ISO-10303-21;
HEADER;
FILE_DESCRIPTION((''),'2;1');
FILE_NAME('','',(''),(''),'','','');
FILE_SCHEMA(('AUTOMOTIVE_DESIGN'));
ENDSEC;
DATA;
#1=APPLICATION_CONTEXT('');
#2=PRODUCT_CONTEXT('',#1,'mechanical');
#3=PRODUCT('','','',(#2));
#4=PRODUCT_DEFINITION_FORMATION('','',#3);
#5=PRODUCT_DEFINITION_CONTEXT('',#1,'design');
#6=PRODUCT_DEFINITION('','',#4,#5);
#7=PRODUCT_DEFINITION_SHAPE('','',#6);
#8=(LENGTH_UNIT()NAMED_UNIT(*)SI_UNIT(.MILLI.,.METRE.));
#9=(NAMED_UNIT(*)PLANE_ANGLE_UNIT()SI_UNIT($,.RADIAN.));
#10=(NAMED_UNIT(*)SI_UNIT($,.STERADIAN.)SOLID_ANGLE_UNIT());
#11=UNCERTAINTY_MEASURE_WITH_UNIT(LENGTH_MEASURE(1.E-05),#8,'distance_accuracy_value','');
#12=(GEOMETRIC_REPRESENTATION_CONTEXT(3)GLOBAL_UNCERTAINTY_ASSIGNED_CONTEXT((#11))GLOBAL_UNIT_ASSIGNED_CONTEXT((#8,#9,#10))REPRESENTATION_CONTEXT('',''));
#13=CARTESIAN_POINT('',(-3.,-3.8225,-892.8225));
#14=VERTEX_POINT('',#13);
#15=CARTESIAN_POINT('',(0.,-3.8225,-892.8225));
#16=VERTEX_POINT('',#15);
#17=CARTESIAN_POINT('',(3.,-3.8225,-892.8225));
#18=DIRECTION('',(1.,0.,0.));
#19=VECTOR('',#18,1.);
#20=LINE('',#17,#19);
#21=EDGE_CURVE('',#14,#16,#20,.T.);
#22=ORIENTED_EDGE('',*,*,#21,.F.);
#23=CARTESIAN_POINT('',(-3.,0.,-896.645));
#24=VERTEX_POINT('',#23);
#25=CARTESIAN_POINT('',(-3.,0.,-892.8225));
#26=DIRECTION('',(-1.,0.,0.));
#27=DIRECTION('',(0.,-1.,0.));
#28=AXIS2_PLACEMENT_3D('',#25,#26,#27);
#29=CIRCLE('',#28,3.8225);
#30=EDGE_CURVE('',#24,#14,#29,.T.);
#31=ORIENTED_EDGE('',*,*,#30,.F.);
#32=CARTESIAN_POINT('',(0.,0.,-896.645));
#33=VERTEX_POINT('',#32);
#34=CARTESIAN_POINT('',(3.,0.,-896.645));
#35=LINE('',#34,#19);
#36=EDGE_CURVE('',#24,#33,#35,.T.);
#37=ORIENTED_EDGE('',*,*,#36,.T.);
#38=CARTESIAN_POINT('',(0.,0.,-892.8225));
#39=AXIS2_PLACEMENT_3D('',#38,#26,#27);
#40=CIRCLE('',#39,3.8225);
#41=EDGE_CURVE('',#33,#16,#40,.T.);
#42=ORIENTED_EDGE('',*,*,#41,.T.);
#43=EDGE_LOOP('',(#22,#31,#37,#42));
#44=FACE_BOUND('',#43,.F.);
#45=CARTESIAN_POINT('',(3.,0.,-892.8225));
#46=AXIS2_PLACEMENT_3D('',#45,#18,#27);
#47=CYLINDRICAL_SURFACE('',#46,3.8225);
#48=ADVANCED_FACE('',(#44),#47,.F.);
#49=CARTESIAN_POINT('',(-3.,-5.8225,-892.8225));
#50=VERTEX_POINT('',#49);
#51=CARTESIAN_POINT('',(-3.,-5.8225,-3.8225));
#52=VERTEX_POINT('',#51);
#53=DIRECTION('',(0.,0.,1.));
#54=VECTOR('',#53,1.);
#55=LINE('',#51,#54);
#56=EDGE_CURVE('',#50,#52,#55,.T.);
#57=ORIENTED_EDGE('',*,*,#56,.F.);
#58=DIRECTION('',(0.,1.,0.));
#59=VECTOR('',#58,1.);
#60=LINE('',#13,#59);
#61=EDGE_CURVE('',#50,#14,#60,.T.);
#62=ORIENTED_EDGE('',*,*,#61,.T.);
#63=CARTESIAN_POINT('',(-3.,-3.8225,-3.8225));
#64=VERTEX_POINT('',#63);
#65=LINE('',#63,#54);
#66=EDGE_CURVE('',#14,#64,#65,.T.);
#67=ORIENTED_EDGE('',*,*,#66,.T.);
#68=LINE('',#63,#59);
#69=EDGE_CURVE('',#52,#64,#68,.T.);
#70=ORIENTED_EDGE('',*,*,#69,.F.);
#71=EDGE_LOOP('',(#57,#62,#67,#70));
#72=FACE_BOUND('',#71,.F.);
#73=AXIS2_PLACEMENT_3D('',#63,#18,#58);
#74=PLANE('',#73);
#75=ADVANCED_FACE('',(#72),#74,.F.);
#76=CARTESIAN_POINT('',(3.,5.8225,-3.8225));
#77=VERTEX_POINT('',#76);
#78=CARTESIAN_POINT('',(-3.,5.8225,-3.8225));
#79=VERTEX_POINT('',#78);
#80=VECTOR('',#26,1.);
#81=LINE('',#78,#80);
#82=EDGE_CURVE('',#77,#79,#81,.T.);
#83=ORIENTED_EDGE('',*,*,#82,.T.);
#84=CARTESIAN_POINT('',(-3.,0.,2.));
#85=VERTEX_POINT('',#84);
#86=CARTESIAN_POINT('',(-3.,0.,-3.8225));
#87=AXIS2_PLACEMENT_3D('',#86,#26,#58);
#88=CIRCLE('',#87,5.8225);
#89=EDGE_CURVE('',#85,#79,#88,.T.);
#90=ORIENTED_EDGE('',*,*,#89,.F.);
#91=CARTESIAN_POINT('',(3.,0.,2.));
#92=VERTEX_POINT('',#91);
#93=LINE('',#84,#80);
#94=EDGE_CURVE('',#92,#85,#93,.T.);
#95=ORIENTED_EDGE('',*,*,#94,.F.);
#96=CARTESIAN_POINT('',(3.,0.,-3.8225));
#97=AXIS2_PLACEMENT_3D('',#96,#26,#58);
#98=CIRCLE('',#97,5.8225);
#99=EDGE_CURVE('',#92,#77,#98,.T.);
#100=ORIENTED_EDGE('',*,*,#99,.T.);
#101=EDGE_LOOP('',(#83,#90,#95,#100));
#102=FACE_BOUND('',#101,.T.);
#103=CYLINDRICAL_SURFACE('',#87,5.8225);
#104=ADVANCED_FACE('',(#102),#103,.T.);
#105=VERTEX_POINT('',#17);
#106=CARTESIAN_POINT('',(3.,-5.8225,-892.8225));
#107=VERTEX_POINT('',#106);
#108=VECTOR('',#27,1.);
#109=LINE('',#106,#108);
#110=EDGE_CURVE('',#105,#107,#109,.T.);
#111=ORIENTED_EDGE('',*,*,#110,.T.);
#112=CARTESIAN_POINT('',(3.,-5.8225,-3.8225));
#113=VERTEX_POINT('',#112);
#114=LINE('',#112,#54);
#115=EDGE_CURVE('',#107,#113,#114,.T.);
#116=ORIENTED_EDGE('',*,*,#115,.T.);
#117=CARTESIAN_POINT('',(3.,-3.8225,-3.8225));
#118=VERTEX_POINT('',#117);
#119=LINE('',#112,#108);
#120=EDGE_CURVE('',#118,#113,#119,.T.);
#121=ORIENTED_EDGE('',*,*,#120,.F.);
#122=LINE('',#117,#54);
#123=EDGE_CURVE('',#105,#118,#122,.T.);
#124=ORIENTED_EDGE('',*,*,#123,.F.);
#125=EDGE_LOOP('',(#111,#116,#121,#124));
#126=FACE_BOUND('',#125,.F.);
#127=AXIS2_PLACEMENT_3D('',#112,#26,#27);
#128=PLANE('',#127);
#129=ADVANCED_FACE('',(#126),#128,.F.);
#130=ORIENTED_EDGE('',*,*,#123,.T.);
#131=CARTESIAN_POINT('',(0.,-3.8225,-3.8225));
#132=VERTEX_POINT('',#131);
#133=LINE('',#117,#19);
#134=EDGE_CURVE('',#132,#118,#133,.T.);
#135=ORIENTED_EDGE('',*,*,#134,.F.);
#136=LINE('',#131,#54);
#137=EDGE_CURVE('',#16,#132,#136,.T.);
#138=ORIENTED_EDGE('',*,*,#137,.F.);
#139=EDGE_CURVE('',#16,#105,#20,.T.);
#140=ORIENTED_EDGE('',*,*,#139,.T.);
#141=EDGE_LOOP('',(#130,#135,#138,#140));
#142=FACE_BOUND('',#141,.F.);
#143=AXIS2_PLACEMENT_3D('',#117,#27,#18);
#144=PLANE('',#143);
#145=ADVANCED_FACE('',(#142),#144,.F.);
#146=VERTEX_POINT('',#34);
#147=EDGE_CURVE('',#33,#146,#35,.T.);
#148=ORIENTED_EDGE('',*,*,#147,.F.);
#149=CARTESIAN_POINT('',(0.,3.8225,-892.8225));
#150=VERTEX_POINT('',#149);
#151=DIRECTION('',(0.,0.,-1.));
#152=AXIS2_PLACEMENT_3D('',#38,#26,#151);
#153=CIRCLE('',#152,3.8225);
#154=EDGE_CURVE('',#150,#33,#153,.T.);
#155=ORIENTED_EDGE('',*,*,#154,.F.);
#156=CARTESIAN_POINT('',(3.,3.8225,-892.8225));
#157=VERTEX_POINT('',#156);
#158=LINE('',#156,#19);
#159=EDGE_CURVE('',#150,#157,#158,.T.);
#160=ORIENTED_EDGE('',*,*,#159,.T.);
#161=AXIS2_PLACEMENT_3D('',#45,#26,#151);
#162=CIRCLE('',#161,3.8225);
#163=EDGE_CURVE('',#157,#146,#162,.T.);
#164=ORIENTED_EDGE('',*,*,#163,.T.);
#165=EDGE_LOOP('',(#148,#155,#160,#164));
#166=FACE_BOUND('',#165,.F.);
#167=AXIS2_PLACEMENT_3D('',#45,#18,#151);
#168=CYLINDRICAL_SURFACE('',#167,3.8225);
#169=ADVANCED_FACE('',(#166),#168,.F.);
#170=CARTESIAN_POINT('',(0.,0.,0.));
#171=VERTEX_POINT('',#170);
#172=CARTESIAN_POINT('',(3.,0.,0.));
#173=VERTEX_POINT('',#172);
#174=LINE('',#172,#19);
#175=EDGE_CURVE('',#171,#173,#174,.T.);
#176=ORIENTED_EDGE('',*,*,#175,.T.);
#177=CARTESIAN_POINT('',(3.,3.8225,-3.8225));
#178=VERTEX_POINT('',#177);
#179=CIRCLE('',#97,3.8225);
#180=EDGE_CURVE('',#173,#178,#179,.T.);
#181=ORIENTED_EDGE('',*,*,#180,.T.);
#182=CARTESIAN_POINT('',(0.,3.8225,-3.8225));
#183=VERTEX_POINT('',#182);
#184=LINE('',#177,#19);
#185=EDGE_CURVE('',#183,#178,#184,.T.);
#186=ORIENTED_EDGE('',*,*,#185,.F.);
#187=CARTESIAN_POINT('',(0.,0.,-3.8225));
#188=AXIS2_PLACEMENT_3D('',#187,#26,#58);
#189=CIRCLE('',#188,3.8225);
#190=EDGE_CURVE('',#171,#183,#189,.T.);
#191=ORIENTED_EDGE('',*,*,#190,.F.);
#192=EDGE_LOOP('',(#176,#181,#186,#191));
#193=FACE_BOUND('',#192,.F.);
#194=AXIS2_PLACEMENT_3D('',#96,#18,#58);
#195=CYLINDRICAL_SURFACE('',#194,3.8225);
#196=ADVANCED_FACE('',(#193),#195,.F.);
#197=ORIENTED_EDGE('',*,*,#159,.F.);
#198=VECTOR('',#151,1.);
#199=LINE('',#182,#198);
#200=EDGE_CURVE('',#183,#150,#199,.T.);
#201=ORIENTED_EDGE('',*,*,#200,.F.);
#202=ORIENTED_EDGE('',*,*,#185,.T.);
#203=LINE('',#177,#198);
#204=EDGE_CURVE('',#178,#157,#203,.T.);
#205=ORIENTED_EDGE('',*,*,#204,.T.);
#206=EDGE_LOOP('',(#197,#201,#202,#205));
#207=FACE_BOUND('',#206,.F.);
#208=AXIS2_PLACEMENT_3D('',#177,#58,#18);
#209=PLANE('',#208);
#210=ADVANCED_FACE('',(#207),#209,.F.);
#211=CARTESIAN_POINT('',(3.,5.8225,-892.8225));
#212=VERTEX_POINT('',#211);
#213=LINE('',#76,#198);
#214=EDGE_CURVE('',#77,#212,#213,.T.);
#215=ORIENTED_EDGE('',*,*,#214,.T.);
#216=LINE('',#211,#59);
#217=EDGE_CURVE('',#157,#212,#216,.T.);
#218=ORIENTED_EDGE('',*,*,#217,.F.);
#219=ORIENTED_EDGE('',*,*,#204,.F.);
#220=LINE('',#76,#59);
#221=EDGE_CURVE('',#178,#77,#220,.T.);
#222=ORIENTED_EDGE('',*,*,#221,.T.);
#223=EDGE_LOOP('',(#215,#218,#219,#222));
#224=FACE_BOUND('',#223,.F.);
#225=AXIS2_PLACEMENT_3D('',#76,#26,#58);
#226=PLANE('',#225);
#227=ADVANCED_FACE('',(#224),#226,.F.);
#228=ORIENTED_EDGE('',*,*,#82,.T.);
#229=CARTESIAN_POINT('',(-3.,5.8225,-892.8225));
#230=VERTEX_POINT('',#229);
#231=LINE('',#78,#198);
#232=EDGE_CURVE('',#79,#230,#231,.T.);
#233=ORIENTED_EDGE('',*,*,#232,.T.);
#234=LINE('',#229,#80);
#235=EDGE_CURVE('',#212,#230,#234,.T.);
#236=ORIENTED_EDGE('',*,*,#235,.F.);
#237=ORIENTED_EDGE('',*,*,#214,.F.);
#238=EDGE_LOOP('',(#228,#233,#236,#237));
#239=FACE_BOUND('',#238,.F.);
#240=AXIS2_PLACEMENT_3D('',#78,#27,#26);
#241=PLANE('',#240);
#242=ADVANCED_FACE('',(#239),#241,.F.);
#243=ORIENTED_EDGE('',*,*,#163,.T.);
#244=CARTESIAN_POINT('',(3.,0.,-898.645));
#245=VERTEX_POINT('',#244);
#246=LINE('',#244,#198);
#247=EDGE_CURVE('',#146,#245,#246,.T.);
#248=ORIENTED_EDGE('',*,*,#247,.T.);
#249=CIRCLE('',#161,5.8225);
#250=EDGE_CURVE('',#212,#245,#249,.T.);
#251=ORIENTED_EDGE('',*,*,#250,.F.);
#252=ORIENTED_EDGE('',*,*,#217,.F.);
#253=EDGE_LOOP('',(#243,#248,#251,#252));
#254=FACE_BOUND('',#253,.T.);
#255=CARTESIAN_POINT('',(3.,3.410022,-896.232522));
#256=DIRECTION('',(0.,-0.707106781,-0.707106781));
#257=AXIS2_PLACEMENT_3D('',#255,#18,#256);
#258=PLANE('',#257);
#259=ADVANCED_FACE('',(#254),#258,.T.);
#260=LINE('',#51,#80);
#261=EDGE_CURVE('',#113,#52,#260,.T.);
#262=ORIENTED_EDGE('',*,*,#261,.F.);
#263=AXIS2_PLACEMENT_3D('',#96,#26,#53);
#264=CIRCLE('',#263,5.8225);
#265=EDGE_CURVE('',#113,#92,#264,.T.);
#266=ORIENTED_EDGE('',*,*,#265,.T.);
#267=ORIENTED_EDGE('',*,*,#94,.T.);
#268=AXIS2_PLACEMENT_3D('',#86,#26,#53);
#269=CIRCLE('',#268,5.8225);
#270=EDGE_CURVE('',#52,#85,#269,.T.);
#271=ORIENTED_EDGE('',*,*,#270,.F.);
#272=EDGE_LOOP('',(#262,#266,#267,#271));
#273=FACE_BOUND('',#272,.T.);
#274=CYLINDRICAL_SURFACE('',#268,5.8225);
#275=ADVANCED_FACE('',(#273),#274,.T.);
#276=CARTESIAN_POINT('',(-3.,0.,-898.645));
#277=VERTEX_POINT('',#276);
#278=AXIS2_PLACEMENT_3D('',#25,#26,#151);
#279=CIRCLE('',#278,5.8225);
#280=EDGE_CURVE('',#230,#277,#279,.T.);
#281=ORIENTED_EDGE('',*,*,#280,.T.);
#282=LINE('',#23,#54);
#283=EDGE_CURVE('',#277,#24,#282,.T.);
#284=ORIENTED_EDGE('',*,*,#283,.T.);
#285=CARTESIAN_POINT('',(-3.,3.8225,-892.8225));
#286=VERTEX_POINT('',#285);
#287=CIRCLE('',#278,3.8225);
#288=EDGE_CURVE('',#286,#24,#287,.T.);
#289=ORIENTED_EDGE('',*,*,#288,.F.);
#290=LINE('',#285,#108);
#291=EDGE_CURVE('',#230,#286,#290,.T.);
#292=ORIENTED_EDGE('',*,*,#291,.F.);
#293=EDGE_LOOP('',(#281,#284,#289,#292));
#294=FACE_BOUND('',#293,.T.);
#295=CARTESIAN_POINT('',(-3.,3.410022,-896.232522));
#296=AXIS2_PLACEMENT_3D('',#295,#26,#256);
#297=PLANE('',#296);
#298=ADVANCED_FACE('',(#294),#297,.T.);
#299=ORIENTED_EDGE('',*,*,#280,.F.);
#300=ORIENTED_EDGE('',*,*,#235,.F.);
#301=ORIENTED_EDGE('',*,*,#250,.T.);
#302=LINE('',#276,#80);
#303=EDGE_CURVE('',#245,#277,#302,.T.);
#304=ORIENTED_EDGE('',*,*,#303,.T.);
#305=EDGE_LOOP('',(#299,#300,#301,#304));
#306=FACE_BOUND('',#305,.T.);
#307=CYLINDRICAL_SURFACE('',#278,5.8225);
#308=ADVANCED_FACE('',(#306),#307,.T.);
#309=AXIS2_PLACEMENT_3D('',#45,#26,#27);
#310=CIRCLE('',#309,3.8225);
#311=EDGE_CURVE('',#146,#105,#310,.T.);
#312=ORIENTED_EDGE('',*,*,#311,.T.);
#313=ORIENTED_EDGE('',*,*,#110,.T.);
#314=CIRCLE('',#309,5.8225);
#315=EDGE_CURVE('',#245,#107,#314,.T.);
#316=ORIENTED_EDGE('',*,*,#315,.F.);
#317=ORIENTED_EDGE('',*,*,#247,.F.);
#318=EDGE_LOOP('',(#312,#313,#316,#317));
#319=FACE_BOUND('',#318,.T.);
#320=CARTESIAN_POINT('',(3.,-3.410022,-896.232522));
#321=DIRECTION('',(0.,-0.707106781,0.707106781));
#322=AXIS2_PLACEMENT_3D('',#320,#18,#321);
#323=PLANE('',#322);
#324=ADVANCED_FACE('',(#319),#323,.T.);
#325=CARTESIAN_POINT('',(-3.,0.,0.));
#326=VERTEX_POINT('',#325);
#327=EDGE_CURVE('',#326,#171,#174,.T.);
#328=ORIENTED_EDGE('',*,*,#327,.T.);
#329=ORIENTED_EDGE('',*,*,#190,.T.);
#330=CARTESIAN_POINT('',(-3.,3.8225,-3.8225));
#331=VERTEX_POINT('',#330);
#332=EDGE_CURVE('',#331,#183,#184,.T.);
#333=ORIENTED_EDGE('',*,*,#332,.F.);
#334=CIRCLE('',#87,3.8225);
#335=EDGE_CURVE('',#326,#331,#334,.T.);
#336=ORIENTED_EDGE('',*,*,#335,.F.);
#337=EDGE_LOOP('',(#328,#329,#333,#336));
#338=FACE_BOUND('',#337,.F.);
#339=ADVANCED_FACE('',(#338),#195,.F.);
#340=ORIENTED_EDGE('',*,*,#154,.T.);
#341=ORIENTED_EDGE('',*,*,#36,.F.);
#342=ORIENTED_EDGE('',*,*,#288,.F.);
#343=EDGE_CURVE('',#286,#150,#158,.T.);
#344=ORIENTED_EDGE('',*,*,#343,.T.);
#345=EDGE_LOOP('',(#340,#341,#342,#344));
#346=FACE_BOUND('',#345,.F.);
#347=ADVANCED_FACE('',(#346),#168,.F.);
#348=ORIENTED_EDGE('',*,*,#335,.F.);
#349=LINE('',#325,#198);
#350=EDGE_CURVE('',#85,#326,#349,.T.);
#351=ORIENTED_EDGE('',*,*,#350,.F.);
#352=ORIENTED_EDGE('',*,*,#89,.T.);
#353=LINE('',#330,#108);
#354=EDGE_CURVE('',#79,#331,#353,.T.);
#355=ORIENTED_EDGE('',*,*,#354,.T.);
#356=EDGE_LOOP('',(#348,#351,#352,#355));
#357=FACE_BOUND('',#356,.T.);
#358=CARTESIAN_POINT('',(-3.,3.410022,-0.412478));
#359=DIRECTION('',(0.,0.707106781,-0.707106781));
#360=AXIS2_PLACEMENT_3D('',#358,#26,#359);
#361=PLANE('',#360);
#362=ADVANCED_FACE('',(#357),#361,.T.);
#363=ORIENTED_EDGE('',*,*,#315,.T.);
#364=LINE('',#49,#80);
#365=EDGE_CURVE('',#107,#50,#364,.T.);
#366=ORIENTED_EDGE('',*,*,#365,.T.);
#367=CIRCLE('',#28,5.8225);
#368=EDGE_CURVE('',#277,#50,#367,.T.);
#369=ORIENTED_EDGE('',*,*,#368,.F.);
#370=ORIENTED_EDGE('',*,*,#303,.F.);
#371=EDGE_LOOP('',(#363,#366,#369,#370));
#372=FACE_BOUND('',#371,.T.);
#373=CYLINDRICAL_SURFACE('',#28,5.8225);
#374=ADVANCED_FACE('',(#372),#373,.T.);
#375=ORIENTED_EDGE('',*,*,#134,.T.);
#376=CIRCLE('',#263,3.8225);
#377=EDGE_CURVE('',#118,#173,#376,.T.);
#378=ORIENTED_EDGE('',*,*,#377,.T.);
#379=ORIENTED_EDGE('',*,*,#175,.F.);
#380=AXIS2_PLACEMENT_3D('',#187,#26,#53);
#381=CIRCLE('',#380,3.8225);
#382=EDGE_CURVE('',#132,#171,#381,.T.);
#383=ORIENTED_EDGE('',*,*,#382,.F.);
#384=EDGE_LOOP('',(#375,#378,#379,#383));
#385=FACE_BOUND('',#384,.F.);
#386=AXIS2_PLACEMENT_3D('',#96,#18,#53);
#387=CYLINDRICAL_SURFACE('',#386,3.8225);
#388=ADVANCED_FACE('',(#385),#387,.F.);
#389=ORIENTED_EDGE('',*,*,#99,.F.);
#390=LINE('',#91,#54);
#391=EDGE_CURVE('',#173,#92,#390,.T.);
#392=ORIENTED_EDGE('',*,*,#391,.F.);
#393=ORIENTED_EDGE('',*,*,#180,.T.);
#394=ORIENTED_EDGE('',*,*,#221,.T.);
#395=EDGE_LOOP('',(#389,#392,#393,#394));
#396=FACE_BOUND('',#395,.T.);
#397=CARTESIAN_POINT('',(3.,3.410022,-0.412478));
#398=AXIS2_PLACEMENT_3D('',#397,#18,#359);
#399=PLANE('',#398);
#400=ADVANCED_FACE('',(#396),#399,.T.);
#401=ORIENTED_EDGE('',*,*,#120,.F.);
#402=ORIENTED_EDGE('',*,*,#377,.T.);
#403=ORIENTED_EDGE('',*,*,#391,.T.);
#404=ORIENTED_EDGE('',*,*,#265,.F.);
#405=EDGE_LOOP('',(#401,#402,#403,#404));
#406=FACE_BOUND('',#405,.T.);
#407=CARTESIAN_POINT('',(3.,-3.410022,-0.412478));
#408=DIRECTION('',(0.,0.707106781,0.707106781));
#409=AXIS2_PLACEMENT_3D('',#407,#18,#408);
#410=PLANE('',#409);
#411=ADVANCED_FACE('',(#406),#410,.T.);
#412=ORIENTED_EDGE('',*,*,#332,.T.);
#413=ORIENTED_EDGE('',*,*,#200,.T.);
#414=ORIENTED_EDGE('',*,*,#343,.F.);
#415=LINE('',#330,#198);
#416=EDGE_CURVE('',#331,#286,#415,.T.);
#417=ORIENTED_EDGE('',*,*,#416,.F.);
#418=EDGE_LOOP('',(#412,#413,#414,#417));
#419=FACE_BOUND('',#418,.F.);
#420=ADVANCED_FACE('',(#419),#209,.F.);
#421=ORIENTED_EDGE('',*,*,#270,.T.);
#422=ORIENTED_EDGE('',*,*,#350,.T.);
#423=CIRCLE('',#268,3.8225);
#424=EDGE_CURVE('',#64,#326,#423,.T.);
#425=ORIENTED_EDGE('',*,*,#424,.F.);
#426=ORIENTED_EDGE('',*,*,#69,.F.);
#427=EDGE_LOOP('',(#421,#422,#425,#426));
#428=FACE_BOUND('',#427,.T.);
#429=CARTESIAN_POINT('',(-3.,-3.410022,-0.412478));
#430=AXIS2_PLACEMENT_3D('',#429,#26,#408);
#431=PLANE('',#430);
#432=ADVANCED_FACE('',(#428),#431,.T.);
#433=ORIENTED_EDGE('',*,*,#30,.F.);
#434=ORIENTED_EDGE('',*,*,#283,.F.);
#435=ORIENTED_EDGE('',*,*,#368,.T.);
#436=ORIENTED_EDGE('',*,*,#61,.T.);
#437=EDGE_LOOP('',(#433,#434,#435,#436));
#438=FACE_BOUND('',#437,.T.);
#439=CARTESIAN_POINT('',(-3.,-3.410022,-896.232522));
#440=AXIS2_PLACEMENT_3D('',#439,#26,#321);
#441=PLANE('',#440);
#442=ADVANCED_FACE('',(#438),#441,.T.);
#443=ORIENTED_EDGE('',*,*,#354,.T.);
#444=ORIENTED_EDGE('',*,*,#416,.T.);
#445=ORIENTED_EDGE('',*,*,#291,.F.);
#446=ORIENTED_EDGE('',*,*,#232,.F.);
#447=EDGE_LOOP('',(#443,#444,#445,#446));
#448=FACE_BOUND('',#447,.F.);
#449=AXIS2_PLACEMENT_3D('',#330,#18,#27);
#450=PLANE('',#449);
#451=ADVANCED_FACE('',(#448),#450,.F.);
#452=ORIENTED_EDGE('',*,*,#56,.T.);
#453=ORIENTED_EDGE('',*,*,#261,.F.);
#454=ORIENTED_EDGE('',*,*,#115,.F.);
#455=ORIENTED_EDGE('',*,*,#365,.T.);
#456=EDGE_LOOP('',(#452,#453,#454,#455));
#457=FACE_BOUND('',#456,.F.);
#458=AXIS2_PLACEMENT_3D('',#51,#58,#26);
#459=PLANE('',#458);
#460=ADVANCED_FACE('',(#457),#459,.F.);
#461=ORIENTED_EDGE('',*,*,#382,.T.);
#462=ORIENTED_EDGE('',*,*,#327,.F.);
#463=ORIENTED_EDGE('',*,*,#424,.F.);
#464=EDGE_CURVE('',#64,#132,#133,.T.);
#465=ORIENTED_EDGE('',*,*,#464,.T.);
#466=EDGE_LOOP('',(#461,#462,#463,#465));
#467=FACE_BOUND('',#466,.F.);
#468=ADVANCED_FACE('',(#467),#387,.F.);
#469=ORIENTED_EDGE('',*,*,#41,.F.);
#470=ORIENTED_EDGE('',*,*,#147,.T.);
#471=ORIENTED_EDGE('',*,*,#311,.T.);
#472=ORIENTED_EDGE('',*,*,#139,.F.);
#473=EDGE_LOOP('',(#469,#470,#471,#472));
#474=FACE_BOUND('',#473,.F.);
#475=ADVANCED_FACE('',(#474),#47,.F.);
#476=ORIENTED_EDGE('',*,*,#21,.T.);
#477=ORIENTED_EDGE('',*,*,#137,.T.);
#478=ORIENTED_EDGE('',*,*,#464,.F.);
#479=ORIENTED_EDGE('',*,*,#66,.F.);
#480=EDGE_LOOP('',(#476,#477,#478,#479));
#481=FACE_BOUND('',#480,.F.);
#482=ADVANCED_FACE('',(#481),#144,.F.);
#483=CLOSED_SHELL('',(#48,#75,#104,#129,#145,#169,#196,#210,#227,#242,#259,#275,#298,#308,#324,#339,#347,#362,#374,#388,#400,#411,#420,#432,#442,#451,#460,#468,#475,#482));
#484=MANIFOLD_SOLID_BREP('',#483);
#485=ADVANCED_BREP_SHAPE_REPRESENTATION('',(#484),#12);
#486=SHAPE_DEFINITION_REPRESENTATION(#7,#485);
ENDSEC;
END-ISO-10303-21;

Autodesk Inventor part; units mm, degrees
ref_plane "YZ Plane" through (0, 0, 0) normal (1, 0, 0) x (0, 1, 0)
ref_plane "XZ Plane" through (0, 0, 0) normal (0, 1, 0) x (-1, 0, 0)
sketch "Sketch1" plane through (0, 0, 0) normal (1, 0, 0) x (0, 1, 0)
  line L0 (3.8225, -3.8225) -> (3.8225, -892.8225)
  arc A0 (3.8225, -3.8225) -> (0, 0) centre (0, -3.8225) ccw
  arc A1 (0, 0) -> (-3.8225, -3.8225) centre (0, -3.8225) ccw
  line L1 (-3.8225, -3.8225) -> (-3.8225, -892.8225)
  arc A2 (0, -896.645) -> (3.8225, -892.8225) centre (0, -892.8225) ccw
  arc A3 (-3.8225, -892.8225) -> (0, -896.645) centre (0, -892.8225) ccw
  line L2 (0, 0) -> (0, -7.645)
  line L3 (0, -889) -> (0, -896.645)
  dimension "d0" = 896.645
  dimension "d2" = 3.8225
  dimension "d3" = 3.8225
ref_plane "Work Plane1" through (0, 0, -3.8225) normal (0, 0, 1) x (1, 0, 0)
sketch "Sketch2" plane through (0, 0, -3.8225) normal (0, 0, 1) x (1, 0, 0)
  line L0 (-3, 5.8225) -> (3, 5.8225)
  line L1 (3, 5.8225) -> (3, 3.8225)
  line L2 (3, 3.8225) -> (-3, 3.8225)
  line L3 (-3, 3.8225) -> (-3, 5.8225)
  line L4 (0, 0) -> (0, 3.8225) projected
  point P0 (0, 0)
  point P1 (0, 5.8225)
  dimension "d5" = 2
  dimension "d6" = 0
  dimension "d7" = 6
sweep "Sweep1" add profiles "Sketch2" path "Sketch1" path curves L0 A2 A3 L1 A1 A0
properties part number "Carriage Belt"
